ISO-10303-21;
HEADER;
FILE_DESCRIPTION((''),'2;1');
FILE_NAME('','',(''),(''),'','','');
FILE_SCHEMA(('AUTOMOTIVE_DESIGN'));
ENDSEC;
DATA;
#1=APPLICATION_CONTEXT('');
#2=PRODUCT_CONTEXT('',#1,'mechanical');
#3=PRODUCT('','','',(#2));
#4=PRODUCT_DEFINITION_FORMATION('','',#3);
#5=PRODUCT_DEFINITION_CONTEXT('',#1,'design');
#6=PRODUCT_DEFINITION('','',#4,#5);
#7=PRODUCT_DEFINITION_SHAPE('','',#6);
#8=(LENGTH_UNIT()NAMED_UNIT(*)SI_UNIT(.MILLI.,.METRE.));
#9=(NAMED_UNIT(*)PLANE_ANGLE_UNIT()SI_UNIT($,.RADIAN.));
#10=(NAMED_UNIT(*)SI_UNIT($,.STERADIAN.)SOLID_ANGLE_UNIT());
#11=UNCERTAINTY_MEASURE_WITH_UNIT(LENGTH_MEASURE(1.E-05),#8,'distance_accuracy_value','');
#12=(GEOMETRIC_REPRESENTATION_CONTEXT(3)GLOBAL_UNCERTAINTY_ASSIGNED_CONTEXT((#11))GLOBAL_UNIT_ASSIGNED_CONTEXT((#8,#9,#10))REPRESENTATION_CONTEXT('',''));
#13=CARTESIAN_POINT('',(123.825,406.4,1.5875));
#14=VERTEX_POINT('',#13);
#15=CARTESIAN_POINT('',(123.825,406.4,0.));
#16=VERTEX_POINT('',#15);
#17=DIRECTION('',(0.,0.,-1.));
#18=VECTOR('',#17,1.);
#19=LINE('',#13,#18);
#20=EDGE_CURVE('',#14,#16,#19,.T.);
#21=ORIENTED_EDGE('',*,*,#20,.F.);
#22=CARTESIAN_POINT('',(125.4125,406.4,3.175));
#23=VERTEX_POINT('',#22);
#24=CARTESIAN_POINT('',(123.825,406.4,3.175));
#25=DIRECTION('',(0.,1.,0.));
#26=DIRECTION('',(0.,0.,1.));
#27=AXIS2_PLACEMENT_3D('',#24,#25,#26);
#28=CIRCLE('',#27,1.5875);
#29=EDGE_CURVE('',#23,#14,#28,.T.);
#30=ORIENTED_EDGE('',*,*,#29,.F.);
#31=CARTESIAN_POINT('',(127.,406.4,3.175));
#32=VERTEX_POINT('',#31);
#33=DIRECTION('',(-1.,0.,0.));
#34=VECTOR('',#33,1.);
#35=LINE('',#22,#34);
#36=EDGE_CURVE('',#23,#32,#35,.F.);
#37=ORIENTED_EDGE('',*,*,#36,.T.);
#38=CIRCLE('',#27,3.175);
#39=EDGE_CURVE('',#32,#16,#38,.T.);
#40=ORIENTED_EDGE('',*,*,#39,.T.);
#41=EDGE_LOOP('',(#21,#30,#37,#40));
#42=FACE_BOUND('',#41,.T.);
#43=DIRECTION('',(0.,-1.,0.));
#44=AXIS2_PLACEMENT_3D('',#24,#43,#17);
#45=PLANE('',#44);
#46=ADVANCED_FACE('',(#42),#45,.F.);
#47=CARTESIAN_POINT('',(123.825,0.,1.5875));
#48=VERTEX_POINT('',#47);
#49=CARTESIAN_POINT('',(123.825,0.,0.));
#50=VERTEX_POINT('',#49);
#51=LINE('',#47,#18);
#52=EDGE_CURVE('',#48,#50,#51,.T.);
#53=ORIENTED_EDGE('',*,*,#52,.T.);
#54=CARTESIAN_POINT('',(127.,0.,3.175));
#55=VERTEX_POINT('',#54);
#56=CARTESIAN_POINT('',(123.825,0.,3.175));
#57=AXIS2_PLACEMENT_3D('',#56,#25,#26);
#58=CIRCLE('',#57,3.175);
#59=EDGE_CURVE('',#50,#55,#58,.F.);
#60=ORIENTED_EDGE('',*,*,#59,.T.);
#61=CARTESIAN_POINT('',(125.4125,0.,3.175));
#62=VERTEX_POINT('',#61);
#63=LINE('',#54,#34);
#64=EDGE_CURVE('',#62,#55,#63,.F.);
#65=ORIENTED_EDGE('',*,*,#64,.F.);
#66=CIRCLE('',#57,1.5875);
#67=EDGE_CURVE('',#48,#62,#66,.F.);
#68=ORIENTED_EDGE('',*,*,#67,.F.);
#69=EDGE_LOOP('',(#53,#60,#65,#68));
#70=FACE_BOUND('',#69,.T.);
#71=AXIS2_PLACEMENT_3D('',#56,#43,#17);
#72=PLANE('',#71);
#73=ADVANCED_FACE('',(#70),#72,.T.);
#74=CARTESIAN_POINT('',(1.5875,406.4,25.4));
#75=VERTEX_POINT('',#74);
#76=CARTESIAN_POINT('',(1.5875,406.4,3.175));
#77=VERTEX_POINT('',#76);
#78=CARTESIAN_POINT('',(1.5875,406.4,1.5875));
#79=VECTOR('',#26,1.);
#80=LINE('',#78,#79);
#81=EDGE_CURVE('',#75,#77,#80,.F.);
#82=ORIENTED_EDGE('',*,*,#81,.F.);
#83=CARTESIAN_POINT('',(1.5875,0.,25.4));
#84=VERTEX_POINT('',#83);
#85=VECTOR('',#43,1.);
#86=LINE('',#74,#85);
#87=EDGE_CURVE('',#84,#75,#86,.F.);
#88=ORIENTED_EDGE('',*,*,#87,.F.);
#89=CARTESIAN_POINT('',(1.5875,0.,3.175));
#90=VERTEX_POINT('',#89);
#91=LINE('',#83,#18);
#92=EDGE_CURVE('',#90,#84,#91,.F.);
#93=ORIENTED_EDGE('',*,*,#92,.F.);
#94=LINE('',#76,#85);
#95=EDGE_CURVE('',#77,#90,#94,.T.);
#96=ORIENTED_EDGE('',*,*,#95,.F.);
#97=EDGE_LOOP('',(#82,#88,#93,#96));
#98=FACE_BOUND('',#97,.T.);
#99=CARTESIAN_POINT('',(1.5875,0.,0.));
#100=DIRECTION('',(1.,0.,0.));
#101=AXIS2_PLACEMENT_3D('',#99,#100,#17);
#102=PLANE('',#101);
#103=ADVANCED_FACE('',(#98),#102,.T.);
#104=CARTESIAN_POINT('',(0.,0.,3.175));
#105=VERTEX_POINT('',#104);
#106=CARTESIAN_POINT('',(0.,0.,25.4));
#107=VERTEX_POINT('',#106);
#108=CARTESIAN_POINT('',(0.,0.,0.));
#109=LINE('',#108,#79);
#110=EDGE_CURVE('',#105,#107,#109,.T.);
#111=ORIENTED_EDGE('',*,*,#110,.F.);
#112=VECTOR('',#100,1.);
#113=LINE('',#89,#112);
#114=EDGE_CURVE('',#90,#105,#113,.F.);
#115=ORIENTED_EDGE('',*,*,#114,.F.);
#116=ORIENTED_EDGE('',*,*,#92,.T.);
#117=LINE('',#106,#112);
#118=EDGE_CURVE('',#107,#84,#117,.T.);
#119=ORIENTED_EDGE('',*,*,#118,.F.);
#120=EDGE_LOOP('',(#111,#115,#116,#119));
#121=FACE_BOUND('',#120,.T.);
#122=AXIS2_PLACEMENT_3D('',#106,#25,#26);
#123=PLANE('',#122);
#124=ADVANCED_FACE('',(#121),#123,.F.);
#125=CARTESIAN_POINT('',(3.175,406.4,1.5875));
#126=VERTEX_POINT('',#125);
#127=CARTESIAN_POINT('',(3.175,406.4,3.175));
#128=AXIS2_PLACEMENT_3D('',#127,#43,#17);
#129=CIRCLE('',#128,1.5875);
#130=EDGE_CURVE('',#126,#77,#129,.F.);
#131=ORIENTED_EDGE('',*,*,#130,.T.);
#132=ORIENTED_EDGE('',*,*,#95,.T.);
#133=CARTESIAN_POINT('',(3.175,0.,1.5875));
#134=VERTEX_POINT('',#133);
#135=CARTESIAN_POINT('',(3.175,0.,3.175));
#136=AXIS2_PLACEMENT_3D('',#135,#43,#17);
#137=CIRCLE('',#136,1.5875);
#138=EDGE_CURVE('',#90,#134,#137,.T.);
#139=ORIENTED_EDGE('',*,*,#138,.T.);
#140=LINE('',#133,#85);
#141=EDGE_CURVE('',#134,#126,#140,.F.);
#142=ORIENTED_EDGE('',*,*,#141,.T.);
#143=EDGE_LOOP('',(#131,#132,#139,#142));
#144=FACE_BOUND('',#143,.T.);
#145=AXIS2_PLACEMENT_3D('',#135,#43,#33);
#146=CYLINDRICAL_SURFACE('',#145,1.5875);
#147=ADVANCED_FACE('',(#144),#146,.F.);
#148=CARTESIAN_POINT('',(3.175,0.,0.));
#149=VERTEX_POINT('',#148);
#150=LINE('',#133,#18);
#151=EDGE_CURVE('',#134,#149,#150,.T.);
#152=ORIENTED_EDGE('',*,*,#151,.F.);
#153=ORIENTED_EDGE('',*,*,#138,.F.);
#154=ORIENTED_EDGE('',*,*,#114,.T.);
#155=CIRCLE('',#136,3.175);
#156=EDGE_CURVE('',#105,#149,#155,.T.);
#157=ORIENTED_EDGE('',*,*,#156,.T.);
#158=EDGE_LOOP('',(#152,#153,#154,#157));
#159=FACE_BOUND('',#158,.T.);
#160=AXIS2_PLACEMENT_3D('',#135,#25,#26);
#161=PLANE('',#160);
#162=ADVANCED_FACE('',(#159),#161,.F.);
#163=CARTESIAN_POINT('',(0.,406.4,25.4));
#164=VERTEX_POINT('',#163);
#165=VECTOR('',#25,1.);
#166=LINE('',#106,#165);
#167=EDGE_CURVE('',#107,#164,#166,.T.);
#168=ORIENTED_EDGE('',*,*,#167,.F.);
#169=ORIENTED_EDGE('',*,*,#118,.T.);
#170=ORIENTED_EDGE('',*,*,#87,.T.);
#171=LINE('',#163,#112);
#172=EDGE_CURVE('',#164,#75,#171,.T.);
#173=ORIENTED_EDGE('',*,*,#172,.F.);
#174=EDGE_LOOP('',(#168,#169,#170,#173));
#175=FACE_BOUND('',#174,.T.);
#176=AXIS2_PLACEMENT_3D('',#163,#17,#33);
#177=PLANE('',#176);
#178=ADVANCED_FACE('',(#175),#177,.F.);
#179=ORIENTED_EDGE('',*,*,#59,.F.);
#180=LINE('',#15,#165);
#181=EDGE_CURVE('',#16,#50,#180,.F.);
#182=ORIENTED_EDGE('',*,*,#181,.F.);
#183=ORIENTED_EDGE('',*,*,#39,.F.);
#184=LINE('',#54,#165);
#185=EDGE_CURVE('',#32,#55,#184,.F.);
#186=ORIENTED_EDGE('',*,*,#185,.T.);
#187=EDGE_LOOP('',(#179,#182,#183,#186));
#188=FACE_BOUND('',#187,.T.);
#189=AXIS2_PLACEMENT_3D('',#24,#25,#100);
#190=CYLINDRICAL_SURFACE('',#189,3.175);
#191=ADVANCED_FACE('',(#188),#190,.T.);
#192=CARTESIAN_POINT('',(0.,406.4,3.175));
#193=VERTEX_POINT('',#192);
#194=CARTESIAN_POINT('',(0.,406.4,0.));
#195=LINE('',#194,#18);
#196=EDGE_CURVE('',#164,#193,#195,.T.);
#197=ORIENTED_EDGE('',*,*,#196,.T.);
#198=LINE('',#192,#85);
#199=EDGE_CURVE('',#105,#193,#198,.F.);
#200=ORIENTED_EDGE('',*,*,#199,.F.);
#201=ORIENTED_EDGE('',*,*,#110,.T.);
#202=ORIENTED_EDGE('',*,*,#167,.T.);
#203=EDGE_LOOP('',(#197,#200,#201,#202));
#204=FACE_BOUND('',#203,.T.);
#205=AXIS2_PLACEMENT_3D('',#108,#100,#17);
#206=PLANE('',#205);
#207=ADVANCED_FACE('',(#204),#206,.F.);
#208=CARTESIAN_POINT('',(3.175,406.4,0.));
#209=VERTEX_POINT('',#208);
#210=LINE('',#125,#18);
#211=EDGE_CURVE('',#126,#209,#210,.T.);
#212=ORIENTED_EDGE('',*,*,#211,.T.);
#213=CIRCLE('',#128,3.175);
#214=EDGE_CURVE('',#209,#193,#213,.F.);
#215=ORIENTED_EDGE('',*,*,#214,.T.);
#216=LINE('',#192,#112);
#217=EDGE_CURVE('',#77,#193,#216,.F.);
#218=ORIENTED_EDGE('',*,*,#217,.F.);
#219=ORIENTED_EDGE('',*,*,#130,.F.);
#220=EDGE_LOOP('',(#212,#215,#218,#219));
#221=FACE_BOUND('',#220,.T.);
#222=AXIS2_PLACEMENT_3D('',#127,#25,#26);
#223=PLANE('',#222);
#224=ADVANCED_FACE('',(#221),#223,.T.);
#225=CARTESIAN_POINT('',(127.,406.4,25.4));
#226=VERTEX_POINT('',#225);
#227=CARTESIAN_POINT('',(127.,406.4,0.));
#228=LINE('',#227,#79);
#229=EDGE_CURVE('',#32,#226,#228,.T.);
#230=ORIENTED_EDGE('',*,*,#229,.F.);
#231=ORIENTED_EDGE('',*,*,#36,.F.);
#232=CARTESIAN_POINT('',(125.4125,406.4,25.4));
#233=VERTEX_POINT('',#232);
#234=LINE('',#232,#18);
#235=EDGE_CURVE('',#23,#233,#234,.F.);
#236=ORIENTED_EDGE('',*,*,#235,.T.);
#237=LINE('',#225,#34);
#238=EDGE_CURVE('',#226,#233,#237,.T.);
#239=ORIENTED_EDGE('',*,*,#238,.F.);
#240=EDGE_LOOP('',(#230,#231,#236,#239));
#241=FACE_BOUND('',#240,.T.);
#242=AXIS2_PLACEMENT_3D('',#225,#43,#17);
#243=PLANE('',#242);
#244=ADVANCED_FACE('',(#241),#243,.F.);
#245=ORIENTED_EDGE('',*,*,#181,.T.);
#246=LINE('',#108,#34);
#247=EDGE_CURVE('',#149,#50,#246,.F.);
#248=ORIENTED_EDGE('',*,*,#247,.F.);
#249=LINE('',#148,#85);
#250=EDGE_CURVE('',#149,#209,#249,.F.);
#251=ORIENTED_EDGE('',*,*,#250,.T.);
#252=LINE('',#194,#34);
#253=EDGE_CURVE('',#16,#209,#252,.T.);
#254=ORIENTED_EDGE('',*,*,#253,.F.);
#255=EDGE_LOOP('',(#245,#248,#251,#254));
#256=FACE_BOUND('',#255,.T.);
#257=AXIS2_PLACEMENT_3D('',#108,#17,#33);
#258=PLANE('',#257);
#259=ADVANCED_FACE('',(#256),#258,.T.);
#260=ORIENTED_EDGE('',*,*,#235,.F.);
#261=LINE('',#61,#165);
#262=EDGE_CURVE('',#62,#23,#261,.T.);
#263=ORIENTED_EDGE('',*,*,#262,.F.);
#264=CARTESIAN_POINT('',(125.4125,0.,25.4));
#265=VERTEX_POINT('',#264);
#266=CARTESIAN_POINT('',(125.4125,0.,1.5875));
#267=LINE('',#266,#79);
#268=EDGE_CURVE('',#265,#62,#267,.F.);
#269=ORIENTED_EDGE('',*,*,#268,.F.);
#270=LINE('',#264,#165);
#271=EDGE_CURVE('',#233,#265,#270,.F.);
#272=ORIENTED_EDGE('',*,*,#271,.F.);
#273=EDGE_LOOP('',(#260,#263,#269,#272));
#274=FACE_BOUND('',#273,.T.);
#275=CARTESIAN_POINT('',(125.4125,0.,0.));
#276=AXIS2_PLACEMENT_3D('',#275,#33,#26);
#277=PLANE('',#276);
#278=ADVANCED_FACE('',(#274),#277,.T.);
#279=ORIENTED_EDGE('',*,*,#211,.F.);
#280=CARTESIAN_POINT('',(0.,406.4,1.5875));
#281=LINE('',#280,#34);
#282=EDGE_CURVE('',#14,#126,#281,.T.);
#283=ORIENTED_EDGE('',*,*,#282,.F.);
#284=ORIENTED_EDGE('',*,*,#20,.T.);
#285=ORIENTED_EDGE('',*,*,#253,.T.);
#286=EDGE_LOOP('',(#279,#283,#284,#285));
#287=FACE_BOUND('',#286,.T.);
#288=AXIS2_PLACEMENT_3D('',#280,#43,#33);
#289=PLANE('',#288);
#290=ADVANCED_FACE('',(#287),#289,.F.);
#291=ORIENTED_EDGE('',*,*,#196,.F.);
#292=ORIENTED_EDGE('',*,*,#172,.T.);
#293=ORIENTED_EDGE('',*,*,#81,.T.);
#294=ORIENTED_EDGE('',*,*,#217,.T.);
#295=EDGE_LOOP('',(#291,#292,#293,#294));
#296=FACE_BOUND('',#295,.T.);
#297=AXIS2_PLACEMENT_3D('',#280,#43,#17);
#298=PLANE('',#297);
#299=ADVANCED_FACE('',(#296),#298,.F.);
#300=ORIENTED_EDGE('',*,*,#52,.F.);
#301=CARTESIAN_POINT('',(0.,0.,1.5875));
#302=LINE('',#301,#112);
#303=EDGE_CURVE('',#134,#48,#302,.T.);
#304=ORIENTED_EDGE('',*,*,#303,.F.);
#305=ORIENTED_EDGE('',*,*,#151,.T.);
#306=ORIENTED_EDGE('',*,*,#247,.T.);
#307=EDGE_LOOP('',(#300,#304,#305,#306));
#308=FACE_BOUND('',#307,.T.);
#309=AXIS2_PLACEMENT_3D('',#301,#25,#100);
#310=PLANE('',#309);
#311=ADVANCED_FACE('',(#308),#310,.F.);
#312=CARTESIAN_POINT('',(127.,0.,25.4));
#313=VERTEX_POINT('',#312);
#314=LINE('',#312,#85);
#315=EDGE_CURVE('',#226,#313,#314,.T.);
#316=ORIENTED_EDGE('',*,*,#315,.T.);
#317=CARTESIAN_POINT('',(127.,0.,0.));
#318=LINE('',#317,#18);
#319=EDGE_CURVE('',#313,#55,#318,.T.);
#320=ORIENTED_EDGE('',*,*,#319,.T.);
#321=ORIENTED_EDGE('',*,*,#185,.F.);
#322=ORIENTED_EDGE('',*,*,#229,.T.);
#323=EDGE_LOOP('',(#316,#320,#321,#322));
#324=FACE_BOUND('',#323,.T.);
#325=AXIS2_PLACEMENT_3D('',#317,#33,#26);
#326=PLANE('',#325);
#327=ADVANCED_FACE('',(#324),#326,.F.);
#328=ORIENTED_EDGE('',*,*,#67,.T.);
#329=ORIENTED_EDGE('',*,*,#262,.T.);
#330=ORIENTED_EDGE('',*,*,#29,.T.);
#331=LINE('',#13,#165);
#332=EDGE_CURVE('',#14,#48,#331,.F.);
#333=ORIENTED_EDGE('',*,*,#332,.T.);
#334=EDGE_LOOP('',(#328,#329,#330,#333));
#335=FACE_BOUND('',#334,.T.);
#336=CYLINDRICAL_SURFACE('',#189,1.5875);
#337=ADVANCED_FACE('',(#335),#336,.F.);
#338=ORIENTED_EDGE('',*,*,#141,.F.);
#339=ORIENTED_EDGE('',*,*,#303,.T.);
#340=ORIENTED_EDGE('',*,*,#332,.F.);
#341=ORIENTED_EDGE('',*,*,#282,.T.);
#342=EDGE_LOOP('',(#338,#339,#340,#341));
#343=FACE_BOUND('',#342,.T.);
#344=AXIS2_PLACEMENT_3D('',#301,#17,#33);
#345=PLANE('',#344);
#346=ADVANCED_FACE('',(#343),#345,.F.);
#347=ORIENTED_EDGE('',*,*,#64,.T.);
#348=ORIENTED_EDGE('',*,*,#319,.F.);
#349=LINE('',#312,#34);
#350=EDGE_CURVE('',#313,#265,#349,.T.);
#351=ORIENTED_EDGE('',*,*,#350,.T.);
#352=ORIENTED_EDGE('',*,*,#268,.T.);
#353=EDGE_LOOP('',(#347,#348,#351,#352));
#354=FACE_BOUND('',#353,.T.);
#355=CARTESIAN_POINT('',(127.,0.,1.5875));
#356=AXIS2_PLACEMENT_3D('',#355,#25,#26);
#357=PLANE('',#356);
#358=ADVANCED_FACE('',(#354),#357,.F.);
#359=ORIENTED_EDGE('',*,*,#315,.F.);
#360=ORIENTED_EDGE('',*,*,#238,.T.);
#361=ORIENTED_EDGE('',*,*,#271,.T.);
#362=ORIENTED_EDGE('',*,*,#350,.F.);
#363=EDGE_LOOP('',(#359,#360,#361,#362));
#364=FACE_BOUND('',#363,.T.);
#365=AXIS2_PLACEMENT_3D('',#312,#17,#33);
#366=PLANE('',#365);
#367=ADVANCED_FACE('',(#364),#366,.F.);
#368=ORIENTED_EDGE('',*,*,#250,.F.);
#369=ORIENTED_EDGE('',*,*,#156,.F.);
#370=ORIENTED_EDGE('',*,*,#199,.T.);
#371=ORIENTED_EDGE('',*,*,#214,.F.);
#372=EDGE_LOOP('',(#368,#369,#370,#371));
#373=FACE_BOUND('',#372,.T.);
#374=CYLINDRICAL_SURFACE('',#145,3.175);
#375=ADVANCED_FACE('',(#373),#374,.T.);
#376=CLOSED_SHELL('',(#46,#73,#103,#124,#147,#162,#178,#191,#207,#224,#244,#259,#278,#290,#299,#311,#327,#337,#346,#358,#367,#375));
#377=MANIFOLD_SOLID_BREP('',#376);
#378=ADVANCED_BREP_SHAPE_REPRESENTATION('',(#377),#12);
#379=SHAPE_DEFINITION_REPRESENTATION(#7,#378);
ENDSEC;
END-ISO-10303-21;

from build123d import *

# Parameters (mm, degrees)
SKETCH1_W                      = 127
SKETCH1_H                      = 406.4
BOSS_EXTRUDE1_DEPTH            = 1.5875
EDGE_FLANGE1_STRIP_W           = 9.525
EDGE_FLANGE1_STRIP_H           = 1.5875
EDGE_FLANGE1_STRIP_CUT_DEPTH   = 406.4
EDGE_FLANGE1_STRIP_2_W         = 9.525
EDGE_FLANGE1_STRIP_2_H         = 1.5875
EDGE_FLANGE1_STRIP_CUT_2_DEPTH = 406.4
EDGE_FLANGE1_DEPTH             = 406.4
EDGE_FLANGE1_BEND_DEPTH        = 406.4


# Sheet-metal steps are written as plain solids
with BuildPart() as part:
    # Sketch1 → Boss-Extrude1 (new body)
    with BuildSketch(Plane.XY):
        with Locations((63.5, 203.2)):
            Rectangle(SKETCH1_W, SKETCH1_H)
    extrude(amount=BOSS_EXTRUDE1_DEPTH)

    # Edge-Flange1 strip (across the edge) → Edge-Flange1 strip cut (cut)
    with BuildSketch(Plane(origin=(127, 0, 1.5875), x_dir=(-1, 0, 0), z_dir=(0, 1, 0))):
        with Locations((-1.5875, -0.79375)):
            Rectangle(EDGE_FLANGE1_STRIP_W, EDGE_FLANGE1_STRIP_H)
    extrude(amount=EDGE_FLANGE1_STRIP_CUT_DEPTH, mode=Mode.SUBTRACT)

    # Edge-Flange1 strip 2 (across the edge) → Edge-Flange1 strip cut 2 (cut)
    with BuildSketch(Plane(origin=(0, 406.4, 1.5875), x_dir=(1, 0, 0), z_dir=(0, -1, 0))):
        with Locations((-1.5875, -0.79375)):
            Rectangle(EDGE_FLANGE1_STRIP_2_W, EDGE_FLANGE1_STRIP_2_H)
    extrude(amount=EDGE_FLANGE1_STRIP_CUT_2_DEPTH, mode=Mode.SUBTRACT)

    # Edge-Flange1 section (across the edge) → Edge-Flange1 (add)
    with BuildSketch(Plane(origin=(127, 0, 1.5875), x_dir=(-1, 0, 0), z_dir=(0, 1, 0))):
        with BuildLine():
            Line((0, 1.5875), (0, 23.8125))
            Line((0, 23.8125), (1.5875, 23.8125))
            Line((1.5875, 23.8125), (1.5875, 1.5875))
            ThreePointArc((1.5875, 1.5875), (2.052467985, 0.464967985), (3.175, 0))
            Line((3.175, 0), (3.175, -1.5875))
            ThreePointArc((3.175, -1.5875), (0.92993597, -0.65756403), (0, 1.5875))
        make_face()
    extrude(amount=EDGE_FLANGE1_DEPTH)

    # Edge-Flange1 section 2 (across the edge) → Edge-Flange1 bend (add)
    with BuildSketch(Plane(origin=(0, 406.4, 1.5875), x_dir=(1, 0, 0), z_dir=(0, -1, 0))):
        with BuildLine():
            Line((0, 1.5875), (0, 23.8125))
            Line((0, 23.8125), (1.5875, 23.8125))
            Line((1.5875, 23.8125), (1.5875, 1.5875))
            ThreePointArc((1.5875, 1.5875), (2.052467985, 0.464967985), (3.175, 0))
            Line((3.175, 0), (3.175, -1.5875))
            ThreePointArc((3.175, -1.5875), (0.92993597, -0.65756403), (0, 1.5875))
        make_face()
    extrude(amount=EDGE_FLANGE1_BEND_DEPTH)


solid = part.part
